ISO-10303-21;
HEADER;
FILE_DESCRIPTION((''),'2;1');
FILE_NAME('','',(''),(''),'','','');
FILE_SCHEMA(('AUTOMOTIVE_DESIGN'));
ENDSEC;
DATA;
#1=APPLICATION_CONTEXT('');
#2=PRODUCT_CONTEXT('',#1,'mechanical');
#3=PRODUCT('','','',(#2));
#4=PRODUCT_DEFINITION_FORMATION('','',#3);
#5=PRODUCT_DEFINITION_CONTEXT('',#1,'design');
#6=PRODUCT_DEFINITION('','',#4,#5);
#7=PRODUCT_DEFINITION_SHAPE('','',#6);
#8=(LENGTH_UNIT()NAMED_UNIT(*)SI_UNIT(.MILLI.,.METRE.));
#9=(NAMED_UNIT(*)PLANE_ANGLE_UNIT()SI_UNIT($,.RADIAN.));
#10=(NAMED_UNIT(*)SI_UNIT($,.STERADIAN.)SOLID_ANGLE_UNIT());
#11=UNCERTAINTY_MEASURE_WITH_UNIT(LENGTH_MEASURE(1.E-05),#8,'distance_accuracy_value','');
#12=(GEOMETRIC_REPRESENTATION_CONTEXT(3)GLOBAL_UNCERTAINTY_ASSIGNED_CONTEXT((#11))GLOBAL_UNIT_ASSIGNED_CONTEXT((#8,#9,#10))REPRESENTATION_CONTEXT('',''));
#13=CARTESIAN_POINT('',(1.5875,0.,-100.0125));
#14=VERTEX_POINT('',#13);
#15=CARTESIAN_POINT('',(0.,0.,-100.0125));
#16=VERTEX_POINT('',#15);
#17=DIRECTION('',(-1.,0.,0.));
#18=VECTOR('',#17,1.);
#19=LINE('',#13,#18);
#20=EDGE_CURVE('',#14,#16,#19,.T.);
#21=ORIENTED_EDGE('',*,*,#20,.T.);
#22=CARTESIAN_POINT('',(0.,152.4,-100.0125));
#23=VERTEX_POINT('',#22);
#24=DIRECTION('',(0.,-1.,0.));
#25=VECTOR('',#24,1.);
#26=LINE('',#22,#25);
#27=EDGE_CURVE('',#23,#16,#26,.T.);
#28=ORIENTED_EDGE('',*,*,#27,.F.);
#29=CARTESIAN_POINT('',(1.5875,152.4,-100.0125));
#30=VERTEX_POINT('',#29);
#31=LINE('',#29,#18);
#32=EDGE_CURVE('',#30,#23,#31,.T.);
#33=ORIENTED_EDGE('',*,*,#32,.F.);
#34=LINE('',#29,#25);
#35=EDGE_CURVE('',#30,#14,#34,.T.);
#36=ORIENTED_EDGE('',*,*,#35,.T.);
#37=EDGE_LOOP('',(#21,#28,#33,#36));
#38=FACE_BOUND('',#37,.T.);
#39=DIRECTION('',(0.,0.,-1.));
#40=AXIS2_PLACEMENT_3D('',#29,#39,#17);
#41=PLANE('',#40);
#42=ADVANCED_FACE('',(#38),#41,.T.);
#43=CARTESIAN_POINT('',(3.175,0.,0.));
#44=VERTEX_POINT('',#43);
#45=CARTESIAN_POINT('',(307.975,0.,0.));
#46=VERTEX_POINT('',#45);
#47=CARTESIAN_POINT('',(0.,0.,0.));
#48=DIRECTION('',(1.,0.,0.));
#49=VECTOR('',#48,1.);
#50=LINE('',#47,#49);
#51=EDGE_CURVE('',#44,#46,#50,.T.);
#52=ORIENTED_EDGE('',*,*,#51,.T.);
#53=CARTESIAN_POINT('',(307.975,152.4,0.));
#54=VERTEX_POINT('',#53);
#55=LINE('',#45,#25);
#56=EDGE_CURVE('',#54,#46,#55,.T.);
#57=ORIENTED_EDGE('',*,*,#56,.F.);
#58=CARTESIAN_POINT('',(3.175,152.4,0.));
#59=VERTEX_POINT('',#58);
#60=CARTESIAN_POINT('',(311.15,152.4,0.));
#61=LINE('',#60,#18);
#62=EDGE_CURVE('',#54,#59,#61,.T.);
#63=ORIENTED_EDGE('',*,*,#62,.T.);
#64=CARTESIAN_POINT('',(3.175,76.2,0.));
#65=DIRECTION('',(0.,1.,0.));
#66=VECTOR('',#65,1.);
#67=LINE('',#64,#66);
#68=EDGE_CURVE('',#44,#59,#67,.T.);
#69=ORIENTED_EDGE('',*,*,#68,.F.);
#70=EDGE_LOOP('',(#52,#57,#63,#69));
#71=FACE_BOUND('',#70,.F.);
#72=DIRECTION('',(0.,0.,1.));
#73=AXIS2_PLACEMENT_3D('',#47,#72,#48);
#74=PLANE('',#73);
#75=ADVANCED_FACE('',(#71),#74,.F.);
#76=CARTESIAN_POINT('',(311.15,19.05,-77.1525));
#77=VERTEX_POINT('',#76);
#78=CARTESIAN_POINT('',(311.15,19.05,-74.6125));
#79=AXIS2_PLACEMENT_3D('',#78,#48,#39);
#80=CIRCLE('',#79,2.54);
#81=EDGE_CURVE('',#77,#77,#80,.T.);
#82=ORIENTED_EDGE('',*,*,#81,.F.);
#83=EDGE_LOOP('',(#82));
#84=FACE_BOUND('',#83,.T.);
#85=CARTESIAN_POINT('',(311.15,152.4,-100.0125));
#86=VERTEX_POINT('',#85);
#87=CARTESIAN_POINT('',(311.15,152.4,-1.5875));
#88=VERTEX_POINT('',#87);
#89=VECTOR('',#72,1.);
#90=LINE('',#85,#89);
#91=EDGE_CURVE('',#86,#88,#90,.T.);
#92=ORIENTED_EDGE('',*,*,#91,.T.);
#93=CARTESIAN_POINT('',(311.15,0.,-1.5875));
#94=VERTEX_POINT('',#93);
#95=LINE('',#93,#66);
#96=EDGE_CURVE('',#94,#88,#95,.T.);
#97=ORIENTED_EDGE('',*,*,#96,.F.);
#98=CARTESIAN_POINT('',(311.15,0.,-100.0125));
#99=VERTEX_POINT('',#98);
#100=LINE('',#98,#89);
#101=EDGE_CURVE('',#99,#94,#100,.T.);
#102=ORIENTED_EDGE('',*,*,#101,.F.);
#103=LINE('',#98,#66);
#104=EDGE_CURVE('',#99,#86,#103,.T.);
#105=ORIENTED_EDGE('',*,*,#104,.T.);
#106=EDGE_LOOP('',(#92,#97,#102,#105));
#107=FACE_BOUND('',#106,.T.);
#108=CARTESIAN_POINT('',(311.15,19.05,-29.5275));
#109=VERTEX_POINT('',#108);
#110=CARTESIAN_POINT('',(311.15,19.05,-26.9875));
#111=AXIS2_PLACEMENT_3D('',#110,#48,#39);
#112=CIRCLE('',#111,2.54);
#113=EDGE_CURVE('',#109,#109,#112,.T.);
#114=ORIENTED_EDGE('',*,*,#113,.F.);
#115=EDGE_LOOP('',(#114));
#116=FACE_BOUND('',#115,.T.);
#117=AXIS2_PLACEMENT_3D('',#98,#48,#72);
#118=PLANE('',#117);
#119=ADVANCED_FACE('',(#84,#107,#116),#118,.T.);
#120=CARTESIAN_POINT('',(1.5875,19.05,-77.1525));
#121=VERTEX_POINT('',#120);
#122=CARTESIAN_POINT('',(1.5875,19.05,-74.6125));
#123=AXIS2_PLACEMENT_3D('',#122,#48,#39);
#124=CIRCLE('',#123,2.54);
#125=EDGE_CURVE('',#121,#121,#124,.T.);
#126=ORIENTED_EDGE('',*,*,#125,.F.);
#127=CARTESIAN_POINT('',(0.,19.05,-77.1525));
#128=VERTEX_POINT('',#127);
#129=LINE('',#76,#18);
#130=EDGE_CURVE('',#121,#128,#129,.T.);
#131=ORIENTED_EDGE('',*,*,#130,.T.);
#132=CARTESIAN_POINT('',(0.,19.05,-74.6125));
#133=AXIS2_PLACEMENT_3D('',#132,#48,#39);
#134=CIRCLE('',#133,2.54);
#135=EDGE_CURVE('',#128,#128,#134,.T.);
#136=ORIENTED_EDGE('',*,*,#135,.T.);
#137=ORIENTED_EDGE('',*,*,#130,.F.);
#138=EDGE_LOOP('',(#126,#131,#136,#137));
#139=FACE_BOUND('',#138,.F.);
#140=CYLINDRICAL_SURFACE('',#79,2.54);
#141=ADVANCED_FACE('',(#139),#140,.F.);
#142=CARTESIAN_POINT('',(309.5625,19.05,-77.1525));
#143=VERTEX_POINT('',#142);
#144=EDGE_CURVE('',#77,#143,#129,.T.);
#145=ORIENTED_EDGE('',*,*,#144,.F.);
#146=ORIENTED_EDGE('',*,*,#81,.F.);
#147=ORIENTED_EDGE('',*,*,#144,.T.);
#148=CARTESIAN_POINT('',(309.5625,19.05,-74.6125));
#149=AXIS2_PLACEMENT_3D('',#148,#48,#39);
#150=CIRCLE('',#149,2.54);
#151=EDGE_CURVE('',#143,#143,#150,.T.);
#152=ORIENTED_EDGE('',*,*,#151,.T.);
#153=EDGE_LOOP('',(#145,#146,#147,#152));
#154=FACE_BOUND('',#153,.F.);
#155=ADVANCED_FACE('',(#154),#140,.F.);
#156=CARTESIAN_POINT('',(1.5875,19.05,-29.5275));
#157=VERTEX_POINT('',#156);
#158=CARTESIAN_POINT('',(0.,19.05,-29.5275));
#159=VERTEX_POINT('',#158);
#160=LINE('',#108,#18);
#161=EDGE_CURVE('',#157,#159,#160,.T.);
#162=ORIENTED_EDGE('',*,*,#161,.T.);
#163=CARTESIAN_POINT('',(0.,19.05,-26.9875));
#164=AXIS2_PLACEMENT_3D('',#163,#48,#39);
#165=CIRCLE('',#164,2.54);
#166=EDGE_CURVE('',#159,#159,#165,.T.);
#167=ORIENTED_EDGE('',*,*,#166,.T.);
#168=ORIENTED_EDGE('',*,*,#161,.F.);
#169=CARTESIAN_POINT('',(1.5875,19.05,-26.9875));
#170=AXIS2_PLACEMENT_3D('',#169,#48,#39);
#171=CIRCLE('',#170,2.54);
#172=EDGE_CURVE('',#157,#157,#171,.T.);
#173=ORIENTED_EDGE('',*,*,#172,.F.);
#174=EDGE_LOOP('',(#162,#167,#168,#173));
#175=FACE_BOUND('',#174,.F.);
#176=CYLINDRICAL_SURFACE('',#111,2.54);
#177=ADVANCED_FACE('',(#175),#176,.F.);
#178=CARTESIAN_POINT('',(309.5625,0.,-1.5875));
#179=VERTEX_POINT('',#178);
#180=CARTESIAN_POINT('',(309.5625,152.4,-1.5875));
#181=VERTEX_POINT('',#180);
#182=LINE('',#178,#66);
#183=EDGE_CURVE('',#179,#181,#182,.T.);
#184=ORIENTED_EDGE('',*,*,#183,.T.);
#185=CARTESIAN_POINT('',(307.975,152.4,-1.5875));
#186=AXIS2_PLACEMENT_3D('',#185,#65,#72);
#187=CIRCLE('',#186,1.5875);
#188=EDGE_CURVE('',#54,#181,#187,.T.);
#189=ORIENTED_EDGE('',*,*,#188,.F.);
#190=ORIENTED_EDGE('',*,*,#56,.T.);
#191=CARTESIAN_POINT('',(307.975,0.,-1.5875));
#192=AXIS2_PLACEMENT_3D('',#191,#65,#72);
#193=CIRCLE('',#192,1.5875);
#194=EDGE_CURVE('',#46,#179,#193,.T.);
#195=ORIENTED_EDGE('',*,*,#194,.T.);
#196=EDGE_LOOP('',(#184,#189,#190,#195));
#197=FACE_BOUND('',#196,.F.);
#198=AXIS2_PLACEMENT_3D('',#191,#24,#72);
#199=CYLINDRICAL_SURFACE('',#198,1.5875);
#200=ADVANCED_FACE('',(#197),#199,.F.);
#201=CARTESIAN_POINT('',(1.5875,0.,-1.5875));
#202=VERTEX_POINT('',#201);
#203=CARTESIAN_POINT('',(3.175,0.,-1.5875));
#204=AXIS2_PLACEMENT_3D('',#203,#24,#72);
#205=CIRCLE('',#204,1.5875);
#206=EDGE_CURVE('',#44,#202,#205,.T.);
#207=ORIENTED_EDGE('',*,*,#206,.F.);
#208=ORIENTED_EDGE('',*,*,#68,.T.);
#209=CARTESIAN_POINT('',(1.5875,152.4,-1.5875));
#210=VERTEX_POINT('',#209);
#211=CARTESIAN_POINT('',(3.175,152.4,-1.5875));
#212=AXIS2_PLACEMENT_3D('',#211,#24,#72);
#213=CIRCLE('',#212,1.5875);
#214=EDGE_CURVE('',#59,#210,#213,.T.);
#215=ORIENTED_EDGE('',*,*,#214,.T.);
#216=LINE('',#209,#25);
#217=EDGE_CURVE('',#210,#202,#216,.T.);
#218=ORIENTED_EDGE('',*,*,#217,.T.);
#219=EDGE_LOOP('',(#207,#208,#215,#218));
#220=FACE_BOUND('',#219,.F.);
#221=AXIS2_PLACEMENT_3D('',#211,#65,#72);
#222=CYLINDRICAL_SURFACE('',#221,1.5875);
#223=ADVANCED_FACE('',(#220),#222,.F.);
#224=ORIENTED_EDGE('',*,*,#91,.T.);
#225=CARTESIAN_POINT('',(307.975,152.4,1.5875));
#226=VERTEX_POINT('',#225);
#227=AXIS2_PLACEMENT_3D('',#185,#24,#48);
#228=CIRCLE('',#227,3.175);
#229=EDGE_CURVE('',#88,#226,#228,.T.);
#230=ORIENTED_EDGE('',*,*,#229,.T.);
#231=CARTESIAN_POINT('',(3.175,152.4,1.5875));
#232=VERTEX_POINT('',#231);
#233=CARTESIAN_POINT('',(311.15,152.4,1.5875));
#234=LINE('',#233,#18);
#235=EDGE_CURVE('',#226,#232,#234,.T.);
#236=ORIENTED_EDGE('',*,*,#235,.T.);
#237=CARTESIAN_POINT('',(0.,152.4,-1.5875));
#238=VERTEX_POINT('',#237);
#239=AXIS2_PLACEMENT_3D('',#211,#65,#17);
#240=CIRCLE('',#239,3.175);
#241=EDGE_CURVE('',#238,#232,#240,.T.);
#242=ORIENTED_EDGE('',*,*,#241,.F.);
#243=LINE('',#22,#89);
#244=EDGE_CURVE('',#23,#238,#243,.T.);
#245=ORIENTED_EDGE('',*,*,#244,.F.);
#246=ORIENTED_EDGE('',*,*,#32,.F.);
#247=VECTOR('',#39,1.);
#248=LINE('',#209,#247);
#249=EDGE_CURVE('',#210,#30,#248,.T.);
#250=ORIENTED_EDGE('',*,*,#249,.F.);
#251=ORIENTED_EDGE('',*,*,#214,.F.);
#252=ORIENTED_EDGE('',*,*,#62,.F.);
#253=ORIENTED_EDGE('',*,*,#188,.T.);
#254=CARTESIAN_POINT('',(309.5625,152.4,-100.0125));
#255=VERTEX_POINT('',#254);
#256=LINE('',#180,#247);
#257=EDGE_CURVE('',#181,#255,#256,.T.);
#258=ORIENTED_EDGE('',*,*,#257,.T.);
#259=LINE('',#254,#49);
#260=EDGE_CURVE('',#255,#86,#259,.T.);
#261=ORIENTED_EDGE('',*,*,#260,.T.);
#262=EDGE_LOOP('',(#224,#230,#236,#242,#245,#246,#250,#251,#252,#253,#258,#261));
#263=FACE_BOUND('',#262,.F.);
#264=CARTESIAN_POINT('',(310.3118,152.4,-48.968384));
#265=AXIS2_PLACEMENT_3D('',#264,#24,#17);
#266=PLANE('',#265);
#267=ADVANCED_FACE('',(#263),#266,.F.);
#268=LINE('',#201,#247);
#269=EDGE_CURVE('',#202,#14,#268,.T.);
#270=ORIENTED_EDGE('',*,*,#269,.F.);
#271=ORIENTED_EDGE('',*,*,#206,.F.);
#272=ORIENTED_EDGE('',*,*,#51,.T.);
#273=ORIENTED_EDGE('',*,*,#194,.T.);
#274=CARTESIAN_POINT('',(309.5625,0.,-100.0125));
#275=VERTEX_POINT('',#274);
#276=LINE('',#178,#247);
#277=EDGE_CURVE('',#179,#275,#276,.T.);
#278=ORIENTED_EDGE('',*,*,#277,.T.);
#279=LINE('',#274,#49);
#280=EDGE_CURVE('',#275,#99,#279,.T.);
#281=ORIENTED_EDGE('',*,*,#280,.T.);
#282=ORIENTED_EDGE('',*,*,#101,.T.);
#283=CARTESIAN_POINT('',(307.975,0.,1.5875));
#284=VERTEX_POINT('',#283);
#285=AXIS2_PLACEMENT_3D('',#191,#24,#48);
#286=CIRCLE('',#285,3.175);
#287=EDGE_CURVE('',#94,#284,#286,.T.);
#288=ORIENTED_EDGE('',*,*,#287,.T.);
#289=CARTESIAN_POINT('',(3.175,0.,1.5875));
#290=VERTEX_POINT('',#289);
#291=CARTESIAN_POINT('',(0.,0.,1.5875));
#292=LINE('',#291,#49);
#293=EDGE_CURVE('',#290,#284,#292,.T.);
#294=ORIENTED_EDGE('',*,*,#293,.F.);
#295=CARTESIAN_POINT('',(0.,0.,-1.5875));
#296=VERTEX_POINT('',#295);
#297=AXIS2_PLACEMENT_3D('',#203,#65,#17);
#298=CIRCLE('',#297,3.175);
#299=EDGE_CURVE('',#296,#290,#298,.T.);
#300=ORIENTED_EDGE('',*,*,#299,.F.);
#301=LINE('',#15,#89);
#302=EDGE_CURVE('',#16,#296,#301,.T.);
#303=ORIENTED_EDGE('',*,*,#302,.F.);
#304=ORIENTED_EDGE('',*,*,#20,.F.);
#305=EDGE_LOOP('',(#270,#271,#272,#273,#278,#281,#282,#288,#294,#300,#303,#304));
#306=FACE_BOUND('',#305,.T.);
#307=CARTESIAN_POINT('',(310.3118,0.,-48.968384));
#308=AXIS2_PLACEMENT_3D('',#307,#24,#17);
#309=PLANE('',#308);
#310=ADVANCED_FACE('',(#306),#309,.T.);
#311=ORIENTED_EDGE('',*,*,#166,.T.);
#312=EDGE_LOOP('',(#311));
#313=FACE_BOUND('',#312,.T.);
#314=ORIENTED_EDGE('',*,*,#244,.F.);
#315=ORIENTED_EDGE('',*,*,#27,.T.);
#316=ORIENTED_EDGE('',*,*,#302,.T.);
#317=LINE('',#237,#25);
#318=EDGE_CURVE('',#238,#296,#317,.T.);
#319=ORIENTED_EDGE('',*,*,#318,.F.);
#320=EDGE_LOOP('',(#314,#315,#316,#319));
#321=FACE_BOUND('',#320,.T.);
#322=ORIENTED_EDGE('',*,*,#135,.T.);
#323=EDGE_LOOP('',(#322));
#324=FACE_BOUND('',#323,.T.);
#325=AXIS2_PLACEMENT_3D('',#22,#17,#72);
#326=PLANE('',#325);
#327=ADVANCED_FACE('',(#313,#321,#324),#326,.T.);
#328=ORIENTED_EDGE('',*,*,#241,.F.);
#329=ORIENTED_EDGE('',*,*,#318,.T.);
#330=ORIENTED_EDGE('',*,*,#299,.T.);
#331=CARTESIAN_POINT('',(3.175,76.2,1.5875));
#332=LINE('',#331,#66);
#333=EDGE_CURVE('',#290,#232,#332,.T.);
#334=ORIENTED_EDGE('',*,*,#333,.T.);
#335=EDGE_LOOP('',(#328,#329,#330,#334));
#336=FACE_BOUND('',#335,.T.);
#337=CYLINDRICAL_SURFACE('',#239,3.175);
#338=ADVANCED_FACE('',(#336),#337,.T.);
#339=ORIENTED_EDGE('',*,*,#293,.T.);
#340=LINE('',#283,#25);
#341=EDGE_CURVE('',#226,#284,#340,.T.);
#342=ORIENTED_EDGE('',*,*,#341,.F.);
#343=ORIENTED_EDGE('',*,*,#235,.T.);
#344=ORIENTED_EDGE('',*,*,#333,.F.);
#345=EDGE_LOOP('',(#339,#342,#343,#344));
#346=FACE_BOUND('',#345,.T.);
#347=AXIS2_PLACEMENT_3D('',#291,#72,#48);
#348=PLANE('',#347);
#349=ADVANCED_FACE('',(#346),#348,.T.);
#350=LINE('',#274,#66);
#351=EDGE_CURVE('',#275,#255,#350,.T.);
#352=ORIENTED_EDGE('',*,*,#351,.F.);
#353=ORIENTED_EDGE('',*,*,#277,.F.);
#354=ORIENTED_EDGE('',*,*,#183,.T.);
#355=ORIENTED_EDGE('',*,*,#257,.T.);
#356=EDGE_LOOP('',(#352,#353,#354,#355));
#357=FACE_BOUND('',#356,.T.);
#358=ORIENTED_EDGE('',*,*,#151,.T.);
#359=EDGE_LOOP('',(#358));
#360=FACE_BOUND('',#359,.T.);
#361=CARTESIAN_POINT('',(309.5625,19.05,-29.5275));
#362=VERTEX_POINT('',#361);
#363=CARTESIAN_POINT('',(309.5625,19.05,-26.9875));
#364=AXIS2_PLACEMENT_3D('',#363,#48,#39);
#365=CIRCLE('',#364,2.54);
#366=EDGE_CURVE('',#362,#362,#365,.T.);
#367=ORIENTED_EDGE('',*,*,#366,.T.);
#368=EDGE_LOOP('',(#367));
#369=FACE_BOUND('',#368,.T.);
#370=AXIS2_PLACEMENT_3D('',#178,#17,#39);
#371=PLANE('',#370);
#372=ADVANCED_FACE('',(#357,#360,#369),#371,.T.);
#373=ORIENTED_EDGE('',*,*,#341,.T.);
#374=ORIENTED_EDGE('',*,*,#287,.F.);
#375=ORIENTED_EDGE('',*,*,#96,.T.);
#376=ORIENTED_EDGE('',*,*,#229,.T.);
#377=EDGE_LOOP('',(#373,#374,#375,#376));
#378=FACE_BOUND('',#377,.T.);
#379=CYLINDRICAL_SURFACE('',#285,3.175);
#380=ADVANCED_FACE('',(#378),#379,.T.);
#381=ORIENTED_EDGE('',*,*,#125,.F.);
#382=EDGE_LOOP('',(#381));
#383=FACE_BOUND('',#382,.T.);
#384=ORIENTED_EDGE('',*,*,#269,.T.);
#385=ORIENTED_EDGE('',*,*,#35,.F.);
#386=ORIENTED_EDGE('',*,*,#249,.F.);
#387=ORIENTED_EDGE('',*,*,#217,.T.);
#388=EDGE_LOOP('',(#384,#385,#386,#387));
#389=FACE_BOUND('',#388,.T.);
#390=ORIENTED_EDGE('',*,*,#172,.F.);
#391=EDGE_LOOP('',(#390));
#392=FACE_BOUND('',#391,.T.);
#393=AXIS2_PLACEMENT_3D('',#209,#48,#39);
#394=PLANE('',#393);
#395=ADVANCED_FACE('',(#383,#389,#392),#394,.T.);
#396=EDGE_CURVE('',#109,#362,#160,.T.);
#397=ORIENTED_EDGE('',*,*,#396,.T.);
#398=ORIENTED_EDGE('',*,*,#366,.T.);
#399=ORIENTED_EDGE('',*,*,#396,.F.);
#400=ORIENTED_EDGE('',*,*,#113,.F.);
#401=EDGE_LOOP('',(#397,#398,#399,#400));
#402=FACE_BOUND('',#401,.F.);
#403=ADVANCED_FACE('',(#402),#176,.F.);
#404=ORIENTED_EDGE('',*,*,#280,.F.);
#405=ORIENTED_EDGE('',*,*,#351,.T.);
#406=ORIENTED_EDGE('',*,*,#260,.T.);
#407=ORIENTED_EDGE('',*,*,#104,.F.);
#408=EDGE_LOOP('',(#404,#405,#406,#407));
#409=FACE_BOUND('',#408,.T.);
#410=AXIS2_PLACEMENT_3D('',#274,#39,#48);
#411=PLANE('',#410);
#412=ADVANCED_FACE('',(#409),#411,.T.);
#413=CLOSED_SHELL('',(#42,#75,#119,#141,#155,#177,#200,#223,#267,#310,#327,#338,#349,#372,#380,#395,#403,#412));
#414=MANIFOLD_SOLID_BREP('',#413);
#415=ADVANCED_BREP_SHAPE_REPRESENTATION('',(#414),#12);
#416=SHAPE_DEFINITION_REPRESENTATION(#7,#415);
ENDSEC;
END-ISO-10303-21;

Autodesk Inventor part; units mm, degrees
ref_plane "YZ Plane" through (0, 0, 0) normal (1, 0, 0) x (0, 1, 0)
ref_plane "XZ Plane" through (0, 0, 0) normal (0, 1, 0) x (-1, 0, 0)
ref_plane "XY Plane" through (0, 0, 0) normal (0, 0, 1) x (1, 0, 0)
sketch "Sketch1" plane through (0, 0, 0) normal (0, 0, 1) x (1, 0, 0)
  line L0 (0, 0) -> (311.15, 0)
  line L1 (311.15, 0) -> (311.15, 152.4)
  line L2 (311.15, 152.4) -> (0, 152.4)
  line L3 (0, 152.4) -> (0, 0)
  dimension "d0" = 311.15
  dimension "d1" = 152.4
extrude "Plate1" add sketch "Sketch1" along normal blind 1.5875
sketch "Sketch2" plane through (309.5625, 0, 1.5875) normal (1, 0, 0) x (0, 1, 0)
  line L0 (152.4, 0) -> (0, 0)
  line L1 (0, 0) -> (0, -101.6)
  line L2 (0, -101.6) -> (152.4, -101.6)
  line L3 (152.4, -101.6) -> (152.4, 0)
edge flange "Flange1" height 101.6 angle 90 thickness 1.5875 bend radius 1.5875 thickness toward (1, 0, 0) relief straight relief width 1.5875 relief depth 0.7937 corner gap 1.5875 corner form 0 edges at (311.15, 76.2, 0) (0, 76.2, 0) wall of the first edge with corners at (309.5625, 152.4, 1.5875) (309.5625, 0, 1.5875) (309.5625, 0, -100.0125) (309.5625, 152.4, -100.0125)
bend "Bend1"
corner "Corner1"
sketch "Sketch3" plane through (311.15, 0, -100.0125) normal (1, 0, 0) x (0, 0, -1)
  circle A0 centre (-73.025, 19.05) radius 2.54
  circle A1 centre (-25.4, 19.05) radius 2.54
  line L0 (0, 152.4) -> (0, 0) projected
  line L1 (-98.425, 152.4) -> (-98.425, 0) projected
  line L2 (0, 0) -> (-98.425, 0) projected
  point P0 (-100.0125, 0)
  dimension "d13" = 5.08
  dimension "d14" = 5.08
  dimension "d15" = 25.4
  dimension "d16" = 25.4
  dimension "d17" = 19.05
  dimension "d18" = 19.05
extrude "Extrusion1" cut sketch "Sketch3" against normal up to surface (311.15 mm away)
equation "\"d3\" = BendReliefWidth"
equation "\"d4\" = BendReliefDepth"
equation "\"d5\" = MinimumRemnant"
equation "\"d6\" = BendRadius"
equation "\"d9\" = BendRadius"
equation "\"d10\" = CornerReliefSize"
equation "\"d11\" = GapSize"
equation "\"d12\" = JacobiRadiusSize"
equation "\"BendRadius\" = Thickness"
equation "\"BendReliefWidth\" = Thickness"
equation "\"BendReliefDepth\" = 0.5 * Thickness"
equation "\"CornerReliefSize\" = 4 * Thickness"
equation "\"MinimumRemnant\" = 2 * Thickness"
equation "\"TransitionRadius\" = BendRadius"
equation "\"JacobiRadiusSize\" = Thickness"
equation "\"GapSize\" = Thickness"
equation "\"d2\" = BendRadius"
equation "\"Thickness\" = 1.5875"
properties part number "Chute"
